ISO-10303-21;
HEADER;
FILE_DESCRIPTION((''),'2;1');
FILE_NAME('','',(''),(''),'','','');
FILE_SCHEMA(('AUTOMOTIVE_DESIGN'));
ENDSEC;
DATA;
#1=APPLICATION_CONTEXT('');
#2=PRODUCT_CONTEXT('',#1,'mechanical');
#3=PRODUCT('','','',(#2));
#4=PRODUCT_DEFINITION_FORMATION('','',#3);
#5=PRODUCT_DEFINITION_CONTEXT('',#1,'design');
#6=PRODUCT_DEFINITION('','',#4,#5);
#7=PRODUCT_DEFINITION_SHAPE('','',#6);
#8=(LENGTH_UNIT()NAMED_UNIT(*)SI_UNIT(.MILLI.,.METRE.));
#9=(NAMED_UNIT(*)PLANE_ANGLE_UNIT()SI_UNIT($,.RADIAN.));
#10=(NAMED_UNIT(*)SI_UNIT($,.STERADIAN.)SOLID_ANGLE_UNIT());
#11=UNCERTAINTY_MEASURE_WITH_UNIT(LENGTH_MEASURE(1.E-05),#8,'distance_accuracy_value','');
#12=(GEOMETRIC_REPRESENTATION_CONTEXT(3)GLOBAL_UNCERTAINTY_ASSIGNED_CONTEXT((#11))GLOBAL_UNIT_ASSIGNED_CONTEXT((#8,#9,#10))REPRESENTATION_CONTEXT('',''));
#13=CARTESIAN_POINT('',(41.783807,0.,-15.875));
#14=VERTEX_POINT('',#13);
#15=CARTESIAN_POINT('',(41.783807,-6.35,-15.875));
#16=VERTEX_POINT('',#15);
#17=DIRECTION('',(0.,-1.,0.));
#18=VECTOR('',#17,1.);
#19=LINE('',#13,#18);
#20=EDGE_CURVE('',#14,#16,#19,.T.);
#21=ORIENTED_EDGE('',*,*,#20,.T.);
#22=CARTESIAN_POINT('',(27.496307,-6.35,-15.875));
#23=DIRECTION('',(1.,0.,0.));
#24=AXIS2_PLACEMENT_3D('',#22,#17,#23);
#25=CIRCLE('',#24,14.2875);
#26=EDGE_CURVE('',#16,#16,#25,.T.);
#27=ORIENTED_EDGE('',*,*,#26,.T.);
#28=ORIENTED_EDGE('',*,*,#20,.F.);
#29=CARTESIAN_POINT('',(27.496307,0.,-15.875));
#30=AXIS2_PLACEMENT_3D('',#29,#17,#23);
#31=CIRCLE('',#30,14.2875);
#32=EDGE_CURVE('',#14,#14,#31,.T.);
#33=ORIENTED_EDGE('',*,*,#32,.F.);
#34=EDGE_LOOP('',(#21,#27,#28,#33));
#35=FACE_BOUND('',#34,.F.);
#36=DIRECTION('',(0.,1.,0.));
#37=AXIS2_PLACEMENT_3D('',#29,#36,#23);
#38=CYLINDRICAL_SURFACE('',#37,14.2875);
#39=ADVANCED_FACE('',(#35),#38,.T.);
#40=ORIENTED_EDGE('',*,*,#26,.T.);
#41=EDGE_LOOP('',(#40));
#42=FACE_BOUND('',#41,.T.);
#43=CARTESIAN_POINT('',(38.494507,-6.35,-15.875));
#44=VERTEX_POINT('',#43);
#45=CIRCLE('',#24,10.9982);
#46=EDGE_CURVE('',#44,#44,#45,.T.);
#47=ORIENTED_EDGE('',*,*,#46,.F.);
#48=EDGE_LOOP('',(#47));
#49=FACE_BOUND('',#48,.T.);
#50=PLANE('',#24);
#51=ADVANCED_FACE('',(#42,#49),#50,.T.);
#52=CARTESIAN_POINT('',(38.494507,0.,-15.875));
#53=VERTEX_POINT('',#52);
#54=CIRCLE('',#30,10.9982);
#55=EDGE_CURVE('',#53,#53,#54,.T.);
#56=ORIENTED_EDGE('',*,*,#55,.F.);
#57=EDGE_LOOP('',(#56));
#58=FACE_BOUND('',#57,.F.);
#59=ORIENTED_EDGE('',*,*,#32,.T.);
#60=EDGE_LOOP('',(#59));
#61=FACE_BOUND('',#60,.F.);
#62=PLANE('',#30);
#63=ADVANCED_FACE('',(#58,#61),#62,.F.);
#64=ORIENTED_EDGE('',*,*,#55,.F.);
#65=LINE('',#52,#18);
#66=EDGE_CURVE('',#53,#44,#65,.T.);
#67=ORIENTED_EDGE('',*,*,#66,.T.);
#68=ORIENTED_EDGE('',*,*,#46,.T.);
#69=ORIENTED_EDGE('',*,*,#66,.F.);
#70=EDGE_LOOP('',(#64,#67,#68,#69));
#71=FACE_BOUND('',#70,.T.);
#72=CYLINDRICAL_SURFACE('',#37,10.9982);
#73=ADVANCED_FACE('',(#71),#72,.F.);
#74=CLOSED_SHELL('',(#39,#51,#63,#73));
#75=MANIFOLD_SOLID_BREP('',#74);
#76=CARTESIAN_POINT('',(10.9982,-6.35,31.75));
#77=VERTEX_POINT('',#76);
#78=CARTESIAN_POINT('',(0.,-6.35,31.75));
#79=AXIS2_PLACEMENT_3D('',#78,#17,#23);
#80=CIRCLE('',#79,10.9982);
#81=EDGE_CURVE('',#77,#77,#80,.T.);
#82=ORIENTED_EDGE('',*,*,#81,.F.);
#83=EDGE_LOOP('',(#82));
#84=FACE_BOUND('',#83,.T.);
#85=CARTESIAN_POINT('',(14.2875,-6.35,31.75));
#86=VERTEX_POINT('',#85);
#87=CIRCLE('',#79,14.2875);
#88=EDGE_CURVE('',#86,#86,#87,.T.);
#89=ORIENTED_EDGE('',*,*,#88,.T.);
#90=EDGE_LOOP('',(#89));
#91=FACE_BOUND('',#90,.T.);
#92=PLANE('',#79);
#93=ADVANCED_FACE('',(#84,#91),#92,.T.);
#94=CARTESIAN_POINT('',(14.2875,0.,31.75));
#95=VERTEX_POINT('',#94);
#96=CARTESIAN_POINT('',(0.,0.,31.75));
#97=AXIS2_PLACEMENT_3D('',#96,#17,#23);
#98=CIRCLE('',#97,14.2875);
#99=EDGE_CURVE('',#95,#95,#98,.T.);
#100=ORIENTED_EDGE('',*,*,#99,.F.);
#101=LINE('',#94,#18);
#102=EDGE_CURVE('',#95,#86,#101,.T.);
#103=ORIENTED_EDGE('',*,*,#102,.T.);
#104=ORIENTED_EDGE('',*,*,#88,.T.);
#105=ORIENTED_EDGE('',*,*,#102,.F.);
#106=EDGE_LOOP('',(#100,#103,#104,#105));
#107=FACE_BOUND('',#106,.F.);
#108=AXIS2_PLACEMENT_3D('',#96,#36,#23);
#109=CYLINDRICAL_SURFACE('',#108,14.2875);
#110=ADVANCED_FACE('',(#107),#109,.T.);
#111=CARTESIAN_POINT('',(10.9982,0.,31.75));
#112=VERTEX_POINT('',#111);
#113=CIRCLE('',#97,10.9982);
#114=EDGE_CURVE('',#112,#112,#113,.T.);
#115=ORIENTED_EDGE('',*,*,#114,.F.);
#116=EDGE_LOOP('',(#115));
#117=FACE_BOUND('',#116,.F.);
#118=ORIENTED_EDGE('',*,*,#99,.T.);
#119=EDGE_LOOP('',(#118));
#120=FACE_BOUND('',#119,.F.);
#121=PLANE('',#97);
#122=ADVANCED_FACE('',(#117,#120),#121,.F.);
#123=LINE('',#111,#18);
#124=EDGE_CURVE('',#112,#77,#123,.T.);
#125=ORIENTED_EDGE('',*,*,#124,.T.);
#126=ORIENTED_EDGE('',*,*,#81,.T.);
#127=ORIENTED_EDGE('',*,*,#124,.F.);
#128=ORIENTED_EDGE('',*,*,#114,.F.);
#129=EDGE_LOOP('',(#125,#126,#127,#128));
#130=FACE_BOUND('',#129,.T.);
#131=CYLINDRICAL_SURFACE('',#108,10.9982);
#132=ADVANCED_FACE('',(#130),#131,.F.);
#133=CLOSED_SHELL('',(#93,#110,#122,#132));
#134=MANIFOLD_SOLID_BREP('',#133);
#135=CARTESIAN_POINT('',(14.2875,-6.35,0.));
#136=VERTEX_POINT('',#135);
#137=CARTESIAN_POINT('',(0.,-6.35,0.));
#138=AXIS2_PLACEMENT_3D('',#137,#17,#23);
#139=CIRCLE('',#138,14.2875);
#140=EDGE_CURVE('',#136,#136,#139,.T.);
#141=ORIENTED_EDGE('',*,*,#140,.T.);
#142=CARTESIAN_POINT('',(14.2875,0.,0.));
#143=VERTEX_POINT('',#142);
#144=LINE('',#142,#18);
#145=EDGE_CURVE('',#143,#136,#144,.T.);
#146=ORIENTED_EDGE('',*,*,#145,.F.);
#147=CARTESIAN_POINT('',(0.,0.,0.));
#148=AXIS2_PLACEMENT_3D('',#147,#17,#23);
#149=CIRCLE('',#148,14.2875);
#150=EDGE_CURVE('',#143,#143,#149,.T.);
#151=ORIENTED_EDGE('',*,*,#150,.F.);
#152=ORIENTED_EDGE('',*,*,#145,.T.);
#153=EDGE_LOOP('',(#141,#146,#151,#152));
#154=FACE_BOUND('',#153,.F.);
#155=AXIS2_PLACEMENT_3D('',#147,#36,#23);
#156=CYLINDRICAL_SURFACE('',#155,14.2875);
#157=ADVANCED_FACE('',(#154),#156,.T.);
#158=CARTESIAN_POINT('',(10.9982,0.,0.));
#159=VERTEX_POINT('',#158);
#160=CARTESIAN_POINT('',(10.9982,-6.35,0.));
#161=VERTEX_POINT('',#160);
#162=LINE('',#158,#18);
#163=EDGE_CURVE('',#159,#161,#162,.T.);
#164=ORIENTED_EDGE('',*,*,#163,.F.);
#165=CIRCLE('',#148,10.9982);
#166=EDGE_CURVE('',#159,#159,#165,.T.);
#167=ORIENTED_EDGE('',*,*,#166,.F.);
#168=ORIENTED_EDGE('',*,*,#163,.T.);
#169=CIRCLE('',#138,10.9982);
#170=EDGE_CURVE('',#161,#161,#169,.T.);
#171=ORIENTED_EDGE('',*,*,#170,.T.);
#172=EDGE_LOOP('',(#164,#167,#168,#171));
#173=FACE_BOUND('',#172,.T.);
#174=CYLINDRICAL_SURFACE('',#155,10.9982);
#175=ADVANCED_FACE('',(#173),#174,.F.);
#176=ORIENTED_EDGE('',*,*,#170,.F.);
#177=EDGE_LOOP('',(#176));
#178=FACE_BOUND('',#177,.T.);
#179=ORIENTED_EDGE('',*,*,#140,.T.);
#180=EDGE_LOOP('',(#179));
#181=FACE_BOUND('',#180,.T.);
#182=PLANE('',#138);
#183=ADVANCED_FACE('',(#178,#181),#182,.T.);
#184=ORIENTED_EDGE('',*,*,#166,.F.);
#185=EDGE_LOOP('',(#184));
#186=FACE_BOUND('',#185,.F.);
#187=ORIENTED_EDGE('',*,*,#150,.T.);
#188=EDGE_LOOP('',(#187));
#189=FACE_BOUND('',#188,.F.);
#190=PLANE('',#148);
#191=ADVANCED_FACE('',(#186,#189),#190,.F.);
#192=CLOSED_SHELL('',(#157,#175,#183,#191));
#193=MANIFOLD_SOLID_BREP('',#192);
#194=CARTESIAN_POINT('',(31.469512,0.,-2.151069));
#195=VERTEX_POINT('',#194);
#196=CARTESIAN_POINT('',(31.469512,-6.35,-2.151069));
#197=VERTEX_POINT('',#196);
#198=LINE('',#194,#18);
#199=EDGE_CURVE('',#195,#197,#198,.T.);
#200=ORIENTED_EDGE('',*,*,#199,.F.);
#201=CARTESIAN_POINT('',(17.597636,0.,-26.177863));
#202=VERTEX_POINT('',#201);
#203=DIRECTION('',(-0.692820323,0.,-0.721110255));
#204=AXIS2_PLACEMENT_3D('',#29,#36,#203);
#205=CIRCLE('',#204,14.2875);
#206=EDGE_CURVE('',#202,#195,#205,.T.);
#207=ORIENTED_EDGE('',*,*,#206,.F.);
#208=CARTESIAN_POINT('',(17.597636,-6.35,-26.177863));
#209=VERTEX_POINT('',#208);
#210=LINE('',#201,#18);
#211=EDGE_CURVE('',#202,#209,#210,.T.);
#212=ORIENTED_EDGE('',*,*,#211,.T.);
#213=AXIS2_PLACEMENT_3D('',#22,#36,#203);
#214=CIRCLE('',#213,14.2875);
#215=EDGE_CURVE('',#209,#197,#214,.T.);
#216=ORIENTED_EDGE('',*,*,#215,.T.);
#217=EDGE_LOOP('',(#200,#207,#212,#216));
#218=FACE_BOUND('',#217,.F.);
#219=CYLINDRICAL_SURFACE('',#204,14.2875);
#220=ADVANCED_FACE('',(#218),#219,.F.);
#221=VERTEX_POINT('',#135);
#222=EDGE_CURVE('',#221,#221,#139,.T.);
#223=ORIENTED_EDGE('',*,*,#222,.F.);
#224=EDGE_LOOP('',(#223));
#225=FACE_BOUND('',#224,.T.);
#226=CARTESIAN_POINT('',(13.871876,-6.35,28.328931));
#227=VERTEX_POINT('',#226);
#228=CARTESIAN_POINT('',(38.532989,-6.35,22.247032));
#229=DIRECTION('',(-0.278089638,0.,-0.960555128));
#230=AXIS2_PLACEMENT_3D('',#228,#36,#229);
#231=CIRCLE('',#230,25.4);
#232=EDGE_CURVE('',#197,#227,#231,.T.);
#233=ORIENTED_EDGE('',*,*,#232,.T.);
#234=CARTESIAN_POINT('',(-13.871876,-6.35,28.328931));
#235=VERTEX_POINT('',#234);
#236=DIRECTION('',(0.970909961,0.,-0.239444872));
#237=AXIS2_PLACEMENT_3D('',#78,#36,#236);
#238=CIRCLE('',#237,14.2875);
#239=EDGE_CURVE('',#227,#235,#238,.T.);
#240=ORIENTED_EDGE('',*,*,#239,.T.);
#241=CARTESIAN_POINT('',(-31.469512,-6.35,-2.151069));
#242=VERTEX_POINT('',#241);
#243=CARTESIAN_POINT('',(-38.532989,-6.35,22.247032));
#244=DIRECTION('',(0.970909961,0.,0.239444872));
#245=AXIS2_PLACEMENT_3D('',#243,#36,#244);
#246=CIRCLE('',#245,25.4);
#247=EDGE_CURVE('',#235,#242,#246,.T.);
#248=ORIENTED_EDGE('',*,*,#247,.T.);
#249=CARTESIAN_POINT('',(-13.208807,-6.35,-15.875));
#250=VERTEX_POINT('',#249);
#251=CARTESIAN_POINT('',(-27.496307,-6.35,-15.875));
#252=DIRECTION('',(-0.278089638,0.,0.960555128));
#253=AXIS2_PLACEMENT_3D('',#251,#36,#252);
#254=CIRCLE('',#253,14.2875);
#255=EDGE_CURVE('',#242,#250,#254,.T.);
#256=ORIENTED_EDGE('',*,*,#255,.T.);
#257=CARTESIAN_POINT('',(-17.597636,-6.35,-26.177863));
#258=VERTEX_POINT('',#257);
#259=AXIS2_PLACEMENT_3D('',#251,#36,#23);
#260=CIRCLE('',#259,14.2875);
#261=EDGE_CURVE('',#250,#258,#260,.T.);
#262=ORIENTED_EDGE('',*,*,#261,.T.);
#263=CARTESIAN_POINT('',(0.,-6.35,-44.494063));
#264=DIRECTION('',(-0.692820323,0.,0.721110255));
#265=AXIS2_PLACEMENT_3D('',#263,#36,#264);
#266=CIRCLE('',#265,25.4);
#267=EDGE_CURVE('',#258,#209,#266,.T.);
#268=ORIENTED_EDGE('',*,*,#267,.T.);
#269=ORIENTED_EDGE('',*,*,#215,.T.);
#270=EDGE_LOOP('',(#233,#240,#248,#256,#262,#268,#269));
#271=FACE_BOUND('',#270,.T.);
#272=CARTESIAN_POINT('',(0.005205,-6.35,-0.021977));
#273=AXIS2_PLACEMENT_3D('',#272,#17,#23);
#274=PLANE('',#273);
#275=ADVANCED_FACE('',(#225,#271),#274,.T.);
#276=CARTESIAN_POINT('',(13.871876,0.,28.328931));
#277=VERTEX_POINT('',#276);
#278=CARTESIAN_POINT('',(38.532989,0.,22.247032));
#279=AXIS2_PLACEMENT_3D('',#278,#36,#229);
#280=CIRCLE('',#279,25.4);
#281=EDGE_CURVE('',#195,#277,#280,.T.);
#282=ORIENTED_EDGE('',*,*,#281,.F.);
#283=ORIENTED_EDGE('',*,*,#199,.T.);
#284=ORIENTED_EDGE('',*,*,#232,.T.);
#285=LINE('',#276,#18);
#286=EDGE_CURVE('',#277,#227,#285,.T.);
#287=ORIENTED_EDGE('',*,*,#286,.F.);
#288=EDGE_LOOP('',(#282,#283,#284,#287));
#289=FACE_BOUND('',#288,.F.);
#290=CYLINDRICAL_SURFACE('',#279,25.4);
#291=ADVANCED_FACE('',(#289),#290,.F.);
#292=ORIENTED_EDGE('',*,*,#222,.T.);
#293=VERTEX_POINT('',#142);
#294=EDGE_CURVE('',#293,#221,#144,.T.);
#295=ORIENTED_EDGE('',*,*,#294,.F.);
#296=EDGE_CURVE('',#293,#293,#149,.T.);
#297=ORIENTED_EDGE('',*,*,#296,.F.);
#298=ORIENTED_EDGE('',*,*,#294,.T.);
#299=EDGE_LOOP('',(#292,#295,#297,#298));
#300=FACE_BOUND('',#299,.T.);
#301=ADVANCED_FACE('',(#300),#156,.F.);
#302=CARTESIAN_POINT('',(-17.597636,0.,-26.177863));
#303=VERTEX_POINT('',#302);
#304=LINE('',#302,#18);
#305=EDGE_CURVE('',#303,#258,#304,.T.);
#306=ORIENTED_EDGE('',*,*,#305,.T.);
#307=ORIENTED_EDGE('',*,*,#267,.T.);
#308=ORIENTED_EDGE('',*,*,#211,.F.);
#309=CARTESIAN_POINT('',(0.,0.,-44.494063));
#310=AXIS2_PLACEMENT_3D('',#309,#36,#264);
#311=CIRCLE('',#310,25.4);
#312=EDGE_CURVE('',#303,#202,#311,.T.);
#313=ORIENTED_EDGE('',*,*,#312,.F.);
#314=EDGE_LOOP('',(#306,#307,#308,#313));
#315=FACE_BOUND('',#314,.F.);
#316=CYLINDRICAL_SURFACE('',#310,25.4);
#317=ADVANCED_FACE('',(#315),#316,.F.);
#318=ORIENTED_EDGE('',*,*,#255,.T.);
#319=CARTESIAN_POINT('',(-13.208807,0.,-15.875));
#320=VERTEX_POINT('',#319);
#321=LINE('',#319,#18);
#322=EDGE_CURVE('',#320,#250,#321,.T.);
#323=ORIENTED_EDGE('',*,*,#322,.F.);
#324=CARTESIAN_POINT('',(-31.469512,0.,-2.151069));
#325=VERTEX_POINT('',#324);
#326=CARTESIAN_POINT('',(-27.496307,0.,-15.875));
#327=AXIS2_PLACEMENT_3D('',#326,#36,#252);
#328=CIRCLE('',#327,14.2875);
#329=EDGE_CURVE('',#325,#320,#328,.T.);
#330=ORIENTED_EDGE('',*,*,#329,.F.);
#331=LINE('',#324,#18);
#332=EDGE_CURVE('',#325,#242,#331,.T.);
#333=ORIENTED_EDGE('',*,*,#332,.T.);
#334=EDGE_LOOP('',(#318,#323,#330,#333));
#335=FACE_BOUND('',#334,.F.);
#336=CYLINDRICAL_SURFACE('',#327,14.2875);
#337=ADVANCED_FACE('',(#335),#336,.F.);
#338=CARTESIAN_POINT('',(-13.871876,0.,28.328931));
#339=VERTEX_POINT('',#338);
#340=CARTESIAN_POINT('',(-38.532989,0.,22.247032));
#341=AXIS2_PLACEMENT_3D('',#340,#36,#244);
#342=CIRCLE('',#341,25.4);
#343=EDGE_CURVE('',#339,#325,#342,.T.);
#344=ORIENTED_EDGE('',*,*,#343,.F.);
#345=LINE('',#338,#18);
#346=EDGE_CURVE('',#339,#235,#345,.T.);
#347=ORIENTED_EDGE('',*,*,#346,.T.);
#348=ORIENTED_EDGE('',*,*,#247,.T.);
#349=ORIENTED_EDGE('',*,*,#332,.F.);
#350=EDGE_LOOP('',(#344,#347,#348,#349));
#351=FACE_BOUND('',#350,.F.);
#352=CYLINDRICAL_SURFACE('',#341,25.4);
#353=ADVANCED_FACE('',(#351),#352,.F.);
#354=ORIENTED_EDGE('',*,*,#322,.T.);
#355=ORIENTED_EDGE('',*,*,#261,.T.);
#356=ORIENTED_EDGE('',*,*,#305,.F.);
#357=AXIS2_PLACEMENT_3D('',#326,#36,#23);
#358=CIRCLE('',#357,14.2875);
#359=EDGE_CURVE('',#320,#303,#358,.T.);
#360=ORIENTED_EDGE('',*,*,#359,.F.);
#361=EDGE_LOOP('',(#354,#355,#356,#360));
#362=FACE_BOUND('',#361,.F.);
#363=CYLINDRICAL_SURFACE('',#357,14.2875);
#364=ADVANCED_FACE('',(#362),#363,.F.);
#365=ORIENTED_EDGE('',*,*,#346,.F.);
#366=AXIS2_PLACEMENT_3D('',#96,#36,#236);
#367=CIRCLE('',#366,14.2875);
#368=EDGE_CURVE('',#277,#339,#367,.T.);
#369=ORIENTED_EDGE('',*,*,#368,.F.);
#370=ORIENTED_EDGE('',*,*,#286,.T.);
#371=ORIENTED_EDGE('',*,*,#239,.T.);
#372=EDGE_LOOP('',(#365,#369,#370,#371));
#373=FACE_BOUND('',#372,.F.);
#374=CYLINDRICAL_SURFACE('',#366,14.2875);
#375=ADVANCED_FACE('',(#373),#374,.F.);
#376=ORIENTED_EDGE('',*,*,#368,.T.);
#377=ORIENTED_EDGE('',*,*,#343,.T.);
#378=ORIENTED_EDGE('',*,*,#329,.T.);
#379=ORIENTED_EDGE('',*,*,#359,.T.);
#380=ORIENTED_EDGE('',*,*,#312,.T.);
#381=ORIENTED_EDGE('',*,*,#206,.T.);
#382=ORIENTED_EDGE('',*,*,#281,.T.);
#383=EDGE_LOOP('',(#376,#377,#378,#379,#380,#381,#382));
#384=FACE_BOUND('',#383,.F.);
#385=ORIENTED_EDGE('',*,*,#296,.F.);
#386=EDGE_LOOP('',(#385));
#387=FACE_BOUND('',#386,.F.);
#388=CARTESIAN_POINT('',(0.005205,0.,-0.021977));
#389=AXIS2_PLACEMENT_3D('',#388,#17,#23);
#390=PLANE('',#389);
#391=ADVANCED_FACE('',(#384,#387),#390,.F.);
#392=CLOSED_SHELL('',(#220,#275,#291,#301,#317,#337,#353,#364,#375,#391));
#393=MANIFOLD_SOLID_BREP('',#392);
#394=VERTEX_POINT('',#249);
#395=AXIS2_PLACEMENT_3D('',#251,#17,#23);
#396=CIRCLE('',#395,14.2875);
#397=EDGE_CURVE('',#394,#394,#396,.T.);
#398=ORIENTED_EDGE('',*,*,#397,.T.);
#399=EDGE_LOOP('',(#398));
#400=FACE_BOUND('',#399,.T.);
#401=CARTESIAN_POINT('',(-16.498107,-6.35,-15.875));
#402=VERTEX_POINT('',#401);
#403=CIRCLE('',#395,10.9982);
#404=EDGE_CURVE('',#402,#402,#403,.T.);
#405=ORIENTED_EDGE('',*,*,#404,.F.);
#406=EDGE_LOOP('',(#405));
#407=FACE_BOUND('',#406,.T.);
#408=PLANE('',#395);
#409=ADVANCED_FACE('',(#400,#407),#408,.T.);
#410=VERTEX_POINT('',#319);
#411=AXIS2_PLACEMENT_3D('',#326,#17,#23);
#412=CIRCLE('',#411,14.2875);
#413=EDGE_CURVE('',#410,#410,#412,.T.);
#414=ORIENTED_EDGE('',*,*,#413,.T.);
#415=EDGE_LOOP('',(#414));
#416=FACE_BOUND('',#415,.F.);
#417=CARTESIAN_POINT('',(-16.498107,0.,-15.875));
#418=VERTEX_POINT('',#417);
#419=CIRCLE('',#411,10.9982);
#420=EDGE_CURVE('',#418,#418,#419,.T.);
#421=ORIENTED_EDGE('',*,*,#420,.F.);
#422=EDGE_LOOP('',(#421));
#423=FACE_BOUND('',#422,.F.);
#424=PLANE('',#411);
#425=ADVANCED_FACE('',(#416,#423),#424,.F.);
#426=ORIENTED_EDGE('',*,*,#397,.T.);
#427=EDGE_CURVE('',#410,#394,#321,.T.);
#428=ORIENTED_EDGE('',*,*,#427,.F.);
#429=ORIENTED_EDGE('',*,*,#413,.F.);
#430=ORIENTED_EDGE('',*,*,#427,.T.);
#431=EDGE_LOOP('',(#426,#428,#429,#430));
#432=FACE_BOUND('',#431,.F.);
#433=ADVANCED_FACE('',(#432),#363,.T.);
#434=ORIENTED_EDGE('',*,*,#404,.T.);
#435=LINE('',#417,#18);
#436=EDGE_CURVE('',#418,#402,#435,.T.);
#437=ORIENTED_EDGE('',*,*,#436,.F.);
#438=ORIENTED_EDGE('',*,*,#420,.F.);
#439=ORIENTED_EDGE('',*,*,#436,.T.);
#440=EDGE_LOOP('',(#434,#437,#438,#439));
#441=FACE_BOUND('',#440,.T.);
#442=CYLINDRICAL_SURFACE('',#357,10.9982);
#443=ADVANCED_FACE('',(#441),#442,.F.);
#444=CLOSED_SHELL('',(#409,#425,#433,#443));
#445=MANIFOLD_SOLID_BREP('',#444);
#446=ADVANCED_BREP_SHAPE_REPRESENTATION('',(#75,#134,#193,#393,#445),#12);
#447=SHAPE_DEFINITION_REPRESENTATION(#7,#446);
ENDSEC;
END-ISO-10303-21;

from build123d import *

# Parameters (mm, degrees)
F0_R     = 14.2875
F0_R_2   = 10.9982
F2_DEPTH = 6.35
F1_R     = 14.2875


with BuildPart() as f2:
    # F0 (on Front) → F2 (new body)
    with BuildSketch(Plane.XZ):
        with Locations((-27.4963065702, -15.875)):
            Circle(F0_R)
        with Locations((-27.4963065702, -15.875)):
            Circle(F0_R_2, mode=Mode.SUBTRACT)
    extrude(amount=F2_DEPTH)


with BuildPart() as f2b:
    # F0 (on Front) → F2, piece 2 (new body)
    with BuildSketch(Plane.XZ):
        Circle(F0_R)
        Circle(F0_R_2, mode=Mode.SUBTRACT)
    extrude(amount=F2_DEPTH)


with BuildPart() as f2c:
    # F0 (on Front) → F2, piece 3 (new body)
    with BuildSketch(Plane.XZ):
        with Locations((0, 31.75)):
            Circle(F0_R)
        with Locations((0, 31.75)):
            Circle(F0_R_2, mode=Mode.SUBTRACT)
    extrude(amount=F2_DEPTH)


with BuildPart() as f2d:
    # F0 (on Front) → F2, piece 4 (new body)
    with BuildSketch(Plane.XZ):
        with Locations((27.4963065702, -15.875)):
            Circle(F0_R)
        with Locations((27.4963065702, -15.875)):
            Circle(F0_R_2, mode=Mode.SUBTRACT)
    extrude(amount=F2_DEPTH)


with BuildPart() as f2e:
    # F1 (on Front) → F2, piece 5 (new body)
    with BuildSketch(Plane.XZ):
        with BuildLine():
            ThreePointArc((-13.8718760728, 28.3289313848), (-16.5359438351, 9.5470316245), (-31.4695122777, -2.1510686152))
            ThreePointArc((-31.4695122777, -2.1510686152), (-18.912441482, -4.4535326513), (-13.2088065702, -15.875))
            ThreePointArc((-13.2088065702, -15.875), (-14.3517276668, -21.4743483284), (-17.5976362049, -26.1778627696))
            ThreePointArc((-17.5976362049, -26.1778627696), (0, -19.094063249), (17.5976362049, -26.1778627696))
            ThreePointArc((17.5976362049, -26.1778627696), (15.1229686136, -8.73125), (31.4695122777, -2.1510686152))
            ThreePointArc((31.4695122777, -2.1510686152), (16.5359438351, 9.5470316245), (13.8718760728, 28.3289313848))
            ThreePointArc((13.8718760728, 28.3289313848), (0, 17.4625), (-13.8718760728, 28.3289313848))
        make_face()
        Circle(F1_R, mode=Mode.SUBTRACT)
    extrude(amount=F2_DEPTH)


solid = Compound([f2.part, f2b.part, f2c.part, f2d.part, f2e.part])
